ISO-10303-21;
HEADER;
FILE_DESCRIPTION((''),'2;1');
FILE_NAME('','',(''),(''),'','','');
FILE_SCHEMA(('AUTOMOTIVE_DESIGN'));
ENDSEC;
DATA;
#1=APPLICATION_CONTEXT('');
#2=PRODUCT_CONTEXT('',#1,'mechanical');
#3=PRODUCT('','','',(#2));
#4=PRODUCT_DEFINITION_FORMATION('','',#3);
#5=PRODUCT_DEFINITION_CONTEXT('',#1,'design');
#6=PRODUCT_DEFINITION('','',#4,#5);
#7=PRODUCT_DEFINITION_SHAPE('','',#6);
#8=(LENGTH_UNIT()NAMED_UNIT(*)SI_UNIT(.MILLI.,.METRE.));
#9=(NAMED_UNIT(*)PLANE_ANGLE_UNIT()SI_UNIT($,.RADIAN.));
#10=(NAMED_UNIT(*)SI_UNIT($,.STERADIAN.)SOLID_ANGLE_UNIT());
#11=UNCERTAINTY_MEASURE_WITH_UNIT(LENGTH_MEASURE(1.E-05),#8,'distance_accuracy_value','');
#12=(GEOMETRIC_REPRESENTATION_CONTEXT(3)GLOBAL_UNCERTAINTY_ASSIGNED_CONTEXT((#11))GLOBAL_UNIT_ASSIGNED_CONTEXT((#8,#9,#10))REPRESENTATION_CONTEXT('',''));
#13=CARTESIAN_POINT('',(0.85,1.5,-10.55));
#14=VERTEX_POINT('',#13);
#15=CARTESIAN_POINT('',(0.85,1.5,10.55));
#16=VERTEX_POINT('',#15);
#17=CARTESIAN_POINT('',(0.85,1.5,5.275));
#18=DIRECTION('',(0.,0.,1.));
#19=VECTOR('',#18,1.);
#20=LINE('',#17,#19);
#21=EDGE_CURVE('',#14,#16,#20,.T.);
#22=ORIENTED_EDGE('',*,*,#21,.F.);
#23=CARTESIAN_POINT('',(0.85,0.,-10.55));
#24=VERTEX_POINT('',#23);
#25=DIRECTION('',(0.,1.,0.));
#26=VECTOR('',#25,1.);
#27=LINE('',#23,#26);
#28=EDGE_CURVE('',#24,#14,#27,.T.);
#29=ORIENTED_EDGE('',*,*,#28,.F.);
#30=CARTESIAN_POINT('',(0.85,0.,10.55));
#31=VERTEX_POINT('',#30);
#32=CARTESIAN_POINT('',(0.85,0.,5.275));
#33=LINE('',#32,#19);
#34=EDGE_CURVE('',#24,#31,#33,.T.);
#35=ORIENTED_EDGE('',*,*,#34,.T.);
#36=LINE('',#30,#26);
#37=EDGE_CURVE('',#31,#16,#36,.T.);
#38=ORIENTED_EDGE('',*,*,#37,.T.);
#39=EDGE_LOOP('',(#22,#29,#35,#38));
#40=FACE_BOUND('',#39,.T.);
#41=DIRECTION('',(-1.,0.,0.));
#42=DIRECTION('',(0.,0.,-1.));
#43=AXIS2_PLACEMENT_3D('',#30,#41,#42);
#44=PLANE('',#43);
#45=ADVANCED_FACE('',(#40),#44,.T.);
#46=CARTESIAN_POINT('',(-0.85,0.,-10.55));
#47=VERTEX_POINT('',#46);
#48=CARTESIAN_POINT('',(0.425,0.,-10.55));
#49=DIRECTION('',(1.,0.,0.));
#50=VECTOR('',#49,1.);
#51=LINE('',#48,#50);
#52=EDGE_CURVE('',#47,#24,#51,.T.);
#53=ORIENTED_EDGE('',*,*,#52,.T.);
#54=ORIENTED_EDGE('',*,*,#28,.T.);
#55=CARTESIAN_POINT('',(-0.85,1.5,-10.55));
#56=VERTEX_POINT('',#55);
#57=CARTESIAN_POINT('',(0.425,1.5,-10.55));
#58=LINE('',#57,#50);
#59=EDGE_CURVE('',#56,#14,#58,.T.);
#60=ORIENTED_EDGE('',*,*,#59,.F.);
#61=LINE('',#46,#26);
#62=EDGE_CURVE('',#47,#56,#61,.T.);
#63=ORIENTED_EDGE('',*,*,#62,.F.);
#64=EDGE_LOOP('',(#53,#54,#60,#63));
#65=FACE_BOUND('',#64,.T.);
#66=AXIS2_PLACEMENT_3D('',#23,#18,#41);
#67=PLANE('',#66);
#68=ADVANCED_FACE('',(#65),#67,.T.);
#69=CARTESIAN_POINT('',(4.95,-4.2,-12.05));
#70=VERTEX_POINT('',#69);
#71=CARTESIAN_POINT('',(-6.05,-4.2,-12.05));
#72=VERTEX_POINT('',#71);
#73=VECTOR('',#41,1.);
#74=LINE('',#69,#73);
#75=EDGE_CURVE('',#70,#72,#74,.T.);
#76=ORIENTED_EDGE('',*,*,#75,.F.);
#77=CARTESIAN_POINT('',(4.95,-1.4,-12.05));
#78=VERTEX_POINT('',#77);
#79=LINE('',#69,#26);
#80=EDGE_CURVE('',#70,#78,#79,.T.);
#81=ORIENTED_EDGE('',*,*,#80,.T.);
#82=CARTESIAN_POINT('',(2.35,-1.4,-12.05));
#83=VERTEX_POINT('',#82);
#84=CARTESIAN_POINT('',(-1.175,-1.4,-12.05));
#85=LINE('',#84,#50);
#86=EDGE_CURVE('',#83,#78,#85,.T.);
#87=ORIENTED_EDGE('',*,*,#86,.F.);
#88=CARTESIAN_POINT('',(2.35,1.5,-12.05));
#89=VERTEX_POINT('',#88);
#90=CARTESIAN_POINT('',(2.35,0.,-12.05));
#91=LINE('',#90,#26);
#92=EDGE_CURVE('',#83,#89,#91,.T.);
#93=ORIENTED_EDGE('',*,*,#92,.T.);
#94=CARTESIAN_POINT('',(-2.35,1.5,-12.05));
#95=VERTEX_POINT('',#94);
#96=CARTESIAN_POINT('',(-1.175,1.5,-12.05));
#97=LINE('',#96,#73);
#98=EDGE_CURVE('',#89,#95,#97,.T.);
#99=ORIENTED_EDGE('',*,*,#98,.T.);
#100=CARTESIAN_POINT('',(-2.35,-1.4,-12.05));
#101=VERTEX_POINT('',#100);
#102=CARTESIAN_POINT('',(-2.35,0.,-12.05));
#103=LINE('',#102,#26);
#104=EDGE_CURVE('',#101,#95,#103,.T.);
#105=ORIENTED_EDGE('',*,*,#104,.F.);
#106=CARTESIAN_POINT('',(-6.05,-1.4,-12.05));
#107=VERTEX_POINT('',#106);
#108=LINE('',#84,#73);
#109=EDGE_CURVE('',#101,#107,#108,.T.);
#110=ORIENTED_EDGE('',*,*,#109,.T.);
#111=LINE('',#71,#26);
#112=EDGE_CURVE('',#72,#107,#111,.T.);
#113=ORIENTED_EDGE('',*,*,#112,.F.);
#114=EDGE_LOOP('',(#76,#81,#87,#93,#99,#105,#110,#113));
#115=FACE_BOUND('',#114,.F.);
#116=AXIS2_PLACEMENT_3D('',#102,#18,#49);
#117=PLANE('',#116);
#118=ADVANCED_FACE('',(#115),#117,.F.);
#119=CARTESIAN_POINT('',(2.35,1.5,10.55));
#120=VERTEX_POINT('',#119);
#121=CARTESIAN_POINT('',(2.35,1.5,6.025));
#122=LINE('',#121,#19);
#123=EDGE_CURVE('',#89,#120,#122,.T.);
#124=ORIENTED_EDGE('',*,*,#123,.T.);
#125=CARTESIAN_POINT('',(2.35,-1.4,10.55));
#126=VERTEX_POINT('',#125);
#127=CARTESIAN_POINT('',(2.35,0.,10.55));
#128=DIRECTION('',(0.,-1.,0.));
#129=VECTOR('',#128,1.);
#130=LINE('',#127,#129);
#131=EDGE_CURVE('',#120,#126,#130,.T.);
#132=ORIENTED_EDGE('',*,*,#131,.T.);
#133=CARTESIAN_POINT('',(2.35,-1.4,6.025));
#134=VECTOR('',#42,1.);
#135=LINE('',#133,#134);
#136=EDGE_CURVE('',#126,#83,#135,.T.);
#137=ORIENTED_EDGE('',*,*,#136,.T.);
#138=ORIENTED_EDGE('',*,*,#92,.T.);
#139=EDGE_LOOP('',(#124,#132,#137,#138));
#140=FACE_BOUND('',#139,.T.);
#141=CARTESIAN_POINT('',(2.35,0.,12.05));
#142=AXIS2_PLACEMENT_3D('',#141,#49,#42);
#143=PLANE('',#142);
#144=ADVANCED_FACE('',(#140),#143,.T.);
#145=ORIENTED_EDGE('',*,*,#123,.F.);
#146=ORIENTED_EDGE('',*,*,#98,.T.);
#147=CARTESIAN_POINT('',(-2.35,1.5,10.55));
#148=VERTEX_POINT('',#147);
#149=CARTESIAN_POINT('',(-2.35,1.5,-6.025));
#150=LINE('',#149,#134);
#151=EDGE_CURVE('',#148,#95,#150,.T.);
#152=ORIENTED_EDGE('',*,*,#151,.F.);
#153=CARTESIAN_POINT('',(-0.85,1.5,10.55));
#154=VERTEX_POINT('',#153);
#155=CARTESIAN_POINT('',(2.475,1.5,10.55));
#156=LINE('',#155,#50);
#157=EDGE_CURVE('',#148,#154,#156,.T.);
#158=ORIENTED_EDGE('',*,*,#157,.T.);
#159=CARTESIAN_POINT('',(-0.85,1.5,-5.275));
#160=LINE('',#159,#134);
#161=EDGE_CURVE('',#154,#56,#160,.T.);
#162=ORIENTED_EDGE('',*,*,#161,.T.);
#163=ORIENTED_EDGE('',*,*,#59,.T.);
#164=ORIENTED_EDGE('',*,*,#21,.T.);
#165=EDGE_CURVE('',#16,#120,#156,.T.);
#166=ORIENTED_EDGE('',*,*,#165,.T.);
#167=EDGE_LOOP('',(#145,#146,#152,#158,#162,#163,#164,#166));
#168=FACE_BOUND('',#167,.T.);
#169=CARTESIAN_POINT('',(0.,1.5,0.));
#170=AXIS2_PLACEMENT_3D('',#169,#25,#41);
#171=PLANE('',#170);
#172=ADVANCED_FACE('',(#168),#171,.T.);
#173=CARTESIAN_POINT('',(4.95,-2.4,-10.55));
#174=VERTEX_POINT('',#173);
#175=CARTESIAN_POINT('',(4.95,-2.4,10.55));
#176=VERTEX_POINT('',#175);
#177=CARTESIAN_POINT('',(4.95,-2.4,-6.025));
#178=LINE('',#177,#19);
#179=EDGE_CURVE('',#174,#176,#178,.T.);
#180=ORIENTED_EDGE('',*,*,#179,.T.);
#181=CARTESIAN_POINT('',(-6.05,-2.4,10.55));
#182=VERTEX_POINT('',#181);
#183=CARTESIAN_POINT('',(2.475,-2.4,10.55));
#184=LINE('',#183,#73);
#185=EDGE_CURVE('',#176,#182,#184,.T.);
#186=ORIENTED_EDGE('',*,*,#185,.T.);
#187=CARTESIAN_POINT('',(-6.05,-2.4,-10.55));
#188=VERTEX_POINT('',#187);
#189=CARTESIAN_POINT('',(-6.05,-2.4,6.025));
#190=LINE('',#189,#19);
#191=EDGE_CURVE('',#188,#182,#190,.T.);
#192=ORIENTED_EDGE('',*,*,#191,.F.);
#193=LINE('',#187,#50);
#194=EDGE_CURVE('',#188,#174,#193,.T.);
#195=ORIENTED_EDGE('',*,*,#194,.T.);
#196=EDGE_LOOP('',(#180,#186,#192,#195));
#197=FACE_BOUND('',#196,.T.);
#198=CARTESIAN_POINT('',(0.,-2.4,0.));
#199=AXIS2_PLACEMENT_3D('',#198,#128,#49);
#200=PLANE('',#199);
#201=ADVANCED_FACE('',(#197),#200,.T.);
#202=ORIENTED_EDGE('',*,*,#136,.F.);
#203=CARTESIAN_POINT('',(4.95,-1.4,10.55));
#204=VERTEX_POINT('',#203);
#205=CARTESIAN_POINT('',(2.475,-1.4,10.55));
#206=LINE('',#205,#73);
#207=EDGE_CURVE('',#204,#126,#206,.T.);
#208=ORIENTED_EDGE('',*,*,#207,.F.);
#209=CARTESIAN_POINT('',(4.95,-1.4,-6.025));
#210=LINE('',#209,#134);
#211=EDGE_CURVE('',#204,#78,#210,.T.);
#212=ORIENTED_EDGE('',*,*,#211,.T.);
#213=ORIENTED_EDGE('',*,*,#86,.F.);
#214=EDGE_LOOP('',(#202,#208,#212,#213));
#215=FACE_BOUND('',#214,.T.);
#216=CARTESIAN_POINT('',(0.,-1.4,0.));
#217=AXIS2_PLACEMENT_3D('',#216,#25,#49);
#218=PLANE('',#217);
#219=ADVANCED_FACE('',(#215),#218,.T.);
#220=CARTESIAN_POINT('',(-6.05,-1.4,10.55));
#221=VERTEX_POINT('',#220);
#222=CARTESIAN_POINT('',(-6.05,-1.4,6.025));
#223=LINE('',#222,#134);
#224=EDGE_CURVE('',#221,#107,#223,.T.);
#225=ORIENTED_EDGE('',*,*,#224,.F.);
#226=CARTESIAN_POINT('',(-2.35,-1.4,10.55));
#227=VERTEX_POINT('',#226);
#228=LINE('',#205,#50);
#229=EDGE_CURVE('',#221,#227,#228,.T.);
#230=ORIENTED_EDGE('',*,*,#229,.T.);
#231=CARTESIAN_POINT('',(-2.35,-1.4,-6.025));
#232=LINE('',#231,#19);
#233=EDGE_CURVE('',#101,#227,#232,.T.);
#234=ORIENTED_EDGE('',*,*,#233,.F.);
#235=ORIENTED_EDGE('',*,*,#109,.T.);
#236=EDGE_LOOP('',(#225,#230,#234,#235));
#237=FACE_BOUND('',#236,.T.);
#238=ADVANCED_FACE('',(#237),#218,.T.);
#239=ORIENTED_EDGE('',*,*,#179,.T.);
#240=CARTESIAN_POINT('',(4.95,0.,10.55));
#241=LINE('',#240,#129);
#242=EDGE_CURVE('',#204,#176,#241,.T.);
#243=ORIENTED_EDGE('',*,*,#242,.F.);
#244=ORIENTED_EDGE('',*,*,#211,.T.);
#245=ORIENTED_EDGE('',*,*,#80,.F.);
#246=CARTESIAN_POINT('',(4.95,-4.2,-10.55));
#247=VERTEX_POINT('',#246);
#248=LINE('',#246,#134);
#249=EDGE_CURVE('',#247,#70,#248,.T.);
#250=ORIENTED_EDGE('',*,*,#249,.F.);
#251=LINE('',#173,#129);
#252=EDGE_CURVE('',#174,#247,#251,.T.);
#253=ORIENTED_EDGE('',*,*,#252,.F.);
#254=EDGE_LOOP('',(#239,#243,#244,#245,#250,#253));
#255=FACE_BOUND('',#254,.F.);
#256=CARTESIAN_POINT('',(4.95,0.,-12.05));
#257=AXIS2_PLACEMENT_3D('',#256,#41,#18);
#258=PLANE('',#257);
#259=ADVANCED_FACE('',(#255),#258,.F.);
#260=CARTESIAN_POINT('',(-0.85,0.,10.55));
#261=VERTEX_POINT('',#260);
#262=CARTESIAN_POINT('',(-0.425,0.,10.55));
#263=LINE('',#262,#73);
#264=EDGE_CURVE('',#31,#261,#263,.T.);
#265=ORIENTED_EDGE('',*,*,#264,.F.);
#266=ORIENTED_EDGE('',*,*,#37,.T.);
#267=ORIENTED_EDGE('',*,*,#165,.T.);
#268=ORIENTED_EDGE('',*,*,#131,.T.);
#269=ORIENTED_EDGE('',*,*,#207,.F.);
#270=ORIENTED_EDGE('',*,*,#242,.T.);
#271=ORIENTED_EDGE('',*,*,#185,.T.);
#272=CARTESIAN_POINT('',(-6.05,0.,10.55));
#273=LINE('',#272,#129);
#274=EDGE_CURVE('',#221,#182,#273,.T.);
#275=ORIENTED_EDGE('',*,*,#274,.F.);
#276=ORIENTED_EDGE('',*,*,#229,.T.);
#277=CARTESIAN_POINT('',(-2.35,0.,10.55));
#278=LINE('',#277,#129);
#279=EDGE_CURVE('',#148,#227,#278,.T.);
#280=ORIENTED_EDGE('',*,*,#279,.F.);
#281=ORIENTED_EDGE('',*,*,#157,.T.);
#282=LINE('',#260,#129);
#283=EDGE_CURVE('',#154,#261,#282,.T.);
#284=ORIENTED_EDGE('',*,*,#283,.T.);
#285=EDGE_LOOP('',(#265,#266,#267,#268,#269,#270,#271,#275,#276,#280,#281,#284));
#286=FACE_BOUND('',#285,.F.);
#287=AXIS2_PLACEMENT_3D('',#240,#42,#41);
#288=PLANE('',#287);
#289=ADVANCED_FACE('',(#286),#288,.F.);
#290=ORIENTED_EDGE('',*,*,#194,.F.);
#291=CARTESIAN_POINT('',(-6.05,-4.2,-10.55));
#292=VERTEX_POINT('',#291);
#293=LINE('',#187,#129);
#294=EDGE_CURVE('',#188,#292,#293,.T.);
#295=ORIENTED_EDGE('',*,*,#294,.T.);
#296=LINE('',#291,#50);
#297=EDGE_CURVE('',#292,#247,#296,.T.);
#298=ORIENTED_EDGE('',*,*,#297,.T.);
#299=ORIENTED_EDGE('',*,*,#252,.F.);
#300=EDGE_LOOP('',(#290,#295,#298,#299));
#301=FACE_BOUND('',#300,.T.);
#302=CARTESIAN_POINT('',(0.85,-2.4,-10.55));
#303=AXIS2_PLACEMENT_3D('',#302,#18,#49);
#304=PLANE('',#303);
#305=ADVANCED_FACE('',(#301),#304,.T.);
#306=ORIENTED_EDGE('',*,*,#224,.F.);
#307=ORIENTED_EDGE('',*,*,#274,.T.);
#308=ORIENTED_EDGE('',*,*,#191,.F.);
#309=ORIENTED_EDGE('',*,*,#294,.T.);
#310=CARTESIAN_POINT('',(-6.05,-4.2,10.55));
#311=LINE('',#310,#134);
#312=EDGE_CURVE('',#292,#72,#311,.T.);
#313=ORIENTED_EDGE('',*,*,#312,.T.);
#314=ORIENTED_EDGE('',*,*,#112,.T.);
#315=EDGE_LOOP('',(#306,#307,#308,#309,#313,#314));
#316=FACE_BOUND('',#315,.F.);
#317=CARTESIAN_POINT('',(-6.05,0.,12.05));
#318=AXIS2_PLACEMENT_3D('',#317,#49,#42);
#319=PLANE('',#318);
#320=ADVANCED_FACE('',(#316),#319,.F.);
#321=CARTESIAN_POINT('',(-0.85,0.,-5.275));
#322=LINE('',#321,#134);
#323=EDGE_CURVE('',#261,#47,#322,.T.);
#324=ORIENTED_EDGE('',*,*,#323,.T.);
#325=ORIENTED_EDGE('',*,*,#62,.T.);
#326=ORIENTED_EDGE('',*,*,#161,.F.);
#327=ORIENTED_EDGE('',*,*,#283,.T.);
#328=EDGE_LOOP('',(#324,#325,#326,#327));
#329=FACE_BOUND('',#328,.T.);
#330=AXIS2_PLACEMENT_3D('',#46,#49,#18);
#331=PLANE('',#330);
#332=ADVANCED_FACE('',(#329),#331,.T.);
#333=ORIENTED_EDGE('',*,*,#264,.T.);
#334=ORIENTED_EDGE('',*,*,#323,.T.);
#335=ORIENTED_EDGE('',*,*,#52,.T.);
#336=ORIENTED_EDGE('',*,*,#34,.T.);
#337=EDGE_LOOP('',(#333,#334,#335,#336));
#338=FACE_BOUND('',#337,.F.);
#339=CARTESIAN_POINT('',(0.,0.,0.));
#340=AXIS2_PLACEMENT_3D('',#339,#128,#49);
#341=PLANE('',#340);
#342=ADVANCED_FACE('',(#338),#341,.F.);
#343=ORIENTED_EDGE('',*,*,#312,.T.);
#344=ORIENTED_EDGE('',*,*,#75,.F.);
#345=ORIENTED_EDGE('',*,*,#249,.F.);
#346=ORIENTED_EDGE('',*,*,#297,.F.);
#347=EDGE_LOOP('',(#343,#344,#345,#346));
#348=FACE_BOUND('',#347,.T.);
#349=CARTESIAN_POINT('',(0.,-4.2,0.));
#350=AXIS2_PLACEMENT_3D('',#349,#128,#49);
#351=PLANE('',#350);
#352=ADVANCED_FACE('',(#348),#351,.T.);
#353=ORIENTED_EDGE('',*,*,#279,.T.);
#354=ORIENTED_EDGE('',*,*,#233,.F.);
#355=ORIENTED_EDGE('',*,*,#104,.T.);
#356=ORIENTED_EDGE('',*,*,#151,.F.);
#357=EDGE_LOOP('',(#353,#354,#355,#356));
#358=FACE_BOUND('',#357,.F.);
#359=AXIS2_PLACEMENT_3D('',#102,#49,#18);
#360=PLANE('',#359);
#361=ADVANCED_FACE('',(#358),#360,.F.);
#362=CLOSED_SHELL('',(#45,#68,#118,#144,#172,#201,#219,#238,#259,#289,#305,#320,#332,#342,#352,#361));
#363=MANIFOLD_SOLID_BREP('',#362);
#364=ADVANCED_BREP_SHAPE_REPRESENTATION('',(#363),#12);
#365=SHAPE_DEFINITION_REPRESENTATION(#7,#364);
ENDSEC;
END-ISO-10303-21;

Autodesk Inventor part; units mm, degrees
ref_plane "YZ Plane" through (0, 0, 0) normal (1, 0, 0) x (0, 1, 0)
ref_plane "XZ Plane" through (0, 0, 0) normal (0, 1, 0) x (-1, 0, 0)
ref_plane "XY Plane" through (0, 0, 0) normal (0, 0, 1) x (1, 0, 0)
sketch "Sketch1" plane through (0, 0, 0) normal (0, 1, 0) x (-1, 0, 0)
  line L0 (0.85, 10.55) -> (-0.85, 10.55)
  line L1 (-0.85, 10.55) -> (-0.85, -10.55)
  line L2 (-0.85, -10.55) -> (0.85, -10.55)
  line L3 (0.85, -10.55) -> (0.85, 10.55)
  line L4 (0.85, 10.55) -> (-0.85, -10.55) construction
  line L5 (-0.85, 10.55) -> (0.85, -10.55) construction
  line L6 (2.35, 12.05) -> (-2.35, 12.05)
  line L7 (-2.35, 12.05) -> (-2.35, -12.05)
  line L8 (-2.35, -12.05) -> (2.35, -12.05)
  line L9 (2.35, -12.05) -> (2.35, 12.05)
  point P0 (0, 0)
  dimension "d0" = 1.7
  dimension "d1" = 21.1
  dimension "d2" = 1.5
extrude "Extrusion1" add sketch "Sketch1" along normal blind 1.5
sketch "Sketch2" plane through (0, 0, 0) normal (0, -1, 0) x (1, 0, 0)
  line L0 (4.95, 12.05) -> (-6.05, 12.05)
  line L1 (-6.05, 12.05) -> (-6.05, -12.05)
  line L2 (-6.05, -12.05) -> (4.95, -12.05)
  line L3 (4.95, -12.05) -> (4.95, 12.05)
  line L4 (-2.35, 12.05) -> (2.35, 12.05) projected
  line L5 (-2.35, -12.05) -> (-2.35, 12.05) projected
  dimension "d5" = 11
  dimension "d6" = 3.7
extrude "Extrusion2" add sketch "Sketch2" along normal blind 2.4
sketch "Sketch3" plane through (0, 0, 0) normal (0, 1, 0) x (1, 0, 0)
  line L0 (-2.35, 12.05) -> (-2.35, -12.05) projected
  line L1 (-6.05, 12.05) -> (-2.35, 12.05) projected
  line L2 (-6.05, -12.05) -> (-6.05, 12.05) projected
  line L3 (-2.35, -12.05) -> (-6.05, -12.05) projected
  line L4 (2.35, -12.05) -> (2.35, 12.05) projected
  line L5 (4.95, -12.05) -> (2.35, -12.05) projected
  line L6 (4.95, 12.05) -> (4.95, -12.05) projected
  line L7 (2.35, 12.05) -> (4.95, 12.05) projected
  point P0 (0, 0)
extrude "Extrusion3" cut sketch "Sketch3" against normal blind 1.4
move faces "Move1" translate (0, 0, -1.5) faces at (0.7833, 0.5333, 12.05)
sketch "Sketch4" plane through (0, -2.4, 0) normal (0, -1, 0) x (1, 0, 0)
  line L0 (-0.85, -10.55) -> (0.85, -10.55) projected
  line L1 (-6.05, 10.55) -> (-6.05, -12.05) projected
  line L2 (2.35, -12.05) -> (4.95, -12.05) projected
  line L3 (-6.05, -10.55) -> (4.95, -10.55)
  line L4 (4.95, -10.55) -> (4.95, -12.05)
  line L5 (4.95, -12.05) -> (-6.05, -12.05)
  line L6 (-6.05, -12.05) -> (-6.05, -10.55)
  point P0 (0, 0)
extrude "Extrusion4" add sketch "Sketch4" along normal blind 1.8
properties part number "gyro_holder"
